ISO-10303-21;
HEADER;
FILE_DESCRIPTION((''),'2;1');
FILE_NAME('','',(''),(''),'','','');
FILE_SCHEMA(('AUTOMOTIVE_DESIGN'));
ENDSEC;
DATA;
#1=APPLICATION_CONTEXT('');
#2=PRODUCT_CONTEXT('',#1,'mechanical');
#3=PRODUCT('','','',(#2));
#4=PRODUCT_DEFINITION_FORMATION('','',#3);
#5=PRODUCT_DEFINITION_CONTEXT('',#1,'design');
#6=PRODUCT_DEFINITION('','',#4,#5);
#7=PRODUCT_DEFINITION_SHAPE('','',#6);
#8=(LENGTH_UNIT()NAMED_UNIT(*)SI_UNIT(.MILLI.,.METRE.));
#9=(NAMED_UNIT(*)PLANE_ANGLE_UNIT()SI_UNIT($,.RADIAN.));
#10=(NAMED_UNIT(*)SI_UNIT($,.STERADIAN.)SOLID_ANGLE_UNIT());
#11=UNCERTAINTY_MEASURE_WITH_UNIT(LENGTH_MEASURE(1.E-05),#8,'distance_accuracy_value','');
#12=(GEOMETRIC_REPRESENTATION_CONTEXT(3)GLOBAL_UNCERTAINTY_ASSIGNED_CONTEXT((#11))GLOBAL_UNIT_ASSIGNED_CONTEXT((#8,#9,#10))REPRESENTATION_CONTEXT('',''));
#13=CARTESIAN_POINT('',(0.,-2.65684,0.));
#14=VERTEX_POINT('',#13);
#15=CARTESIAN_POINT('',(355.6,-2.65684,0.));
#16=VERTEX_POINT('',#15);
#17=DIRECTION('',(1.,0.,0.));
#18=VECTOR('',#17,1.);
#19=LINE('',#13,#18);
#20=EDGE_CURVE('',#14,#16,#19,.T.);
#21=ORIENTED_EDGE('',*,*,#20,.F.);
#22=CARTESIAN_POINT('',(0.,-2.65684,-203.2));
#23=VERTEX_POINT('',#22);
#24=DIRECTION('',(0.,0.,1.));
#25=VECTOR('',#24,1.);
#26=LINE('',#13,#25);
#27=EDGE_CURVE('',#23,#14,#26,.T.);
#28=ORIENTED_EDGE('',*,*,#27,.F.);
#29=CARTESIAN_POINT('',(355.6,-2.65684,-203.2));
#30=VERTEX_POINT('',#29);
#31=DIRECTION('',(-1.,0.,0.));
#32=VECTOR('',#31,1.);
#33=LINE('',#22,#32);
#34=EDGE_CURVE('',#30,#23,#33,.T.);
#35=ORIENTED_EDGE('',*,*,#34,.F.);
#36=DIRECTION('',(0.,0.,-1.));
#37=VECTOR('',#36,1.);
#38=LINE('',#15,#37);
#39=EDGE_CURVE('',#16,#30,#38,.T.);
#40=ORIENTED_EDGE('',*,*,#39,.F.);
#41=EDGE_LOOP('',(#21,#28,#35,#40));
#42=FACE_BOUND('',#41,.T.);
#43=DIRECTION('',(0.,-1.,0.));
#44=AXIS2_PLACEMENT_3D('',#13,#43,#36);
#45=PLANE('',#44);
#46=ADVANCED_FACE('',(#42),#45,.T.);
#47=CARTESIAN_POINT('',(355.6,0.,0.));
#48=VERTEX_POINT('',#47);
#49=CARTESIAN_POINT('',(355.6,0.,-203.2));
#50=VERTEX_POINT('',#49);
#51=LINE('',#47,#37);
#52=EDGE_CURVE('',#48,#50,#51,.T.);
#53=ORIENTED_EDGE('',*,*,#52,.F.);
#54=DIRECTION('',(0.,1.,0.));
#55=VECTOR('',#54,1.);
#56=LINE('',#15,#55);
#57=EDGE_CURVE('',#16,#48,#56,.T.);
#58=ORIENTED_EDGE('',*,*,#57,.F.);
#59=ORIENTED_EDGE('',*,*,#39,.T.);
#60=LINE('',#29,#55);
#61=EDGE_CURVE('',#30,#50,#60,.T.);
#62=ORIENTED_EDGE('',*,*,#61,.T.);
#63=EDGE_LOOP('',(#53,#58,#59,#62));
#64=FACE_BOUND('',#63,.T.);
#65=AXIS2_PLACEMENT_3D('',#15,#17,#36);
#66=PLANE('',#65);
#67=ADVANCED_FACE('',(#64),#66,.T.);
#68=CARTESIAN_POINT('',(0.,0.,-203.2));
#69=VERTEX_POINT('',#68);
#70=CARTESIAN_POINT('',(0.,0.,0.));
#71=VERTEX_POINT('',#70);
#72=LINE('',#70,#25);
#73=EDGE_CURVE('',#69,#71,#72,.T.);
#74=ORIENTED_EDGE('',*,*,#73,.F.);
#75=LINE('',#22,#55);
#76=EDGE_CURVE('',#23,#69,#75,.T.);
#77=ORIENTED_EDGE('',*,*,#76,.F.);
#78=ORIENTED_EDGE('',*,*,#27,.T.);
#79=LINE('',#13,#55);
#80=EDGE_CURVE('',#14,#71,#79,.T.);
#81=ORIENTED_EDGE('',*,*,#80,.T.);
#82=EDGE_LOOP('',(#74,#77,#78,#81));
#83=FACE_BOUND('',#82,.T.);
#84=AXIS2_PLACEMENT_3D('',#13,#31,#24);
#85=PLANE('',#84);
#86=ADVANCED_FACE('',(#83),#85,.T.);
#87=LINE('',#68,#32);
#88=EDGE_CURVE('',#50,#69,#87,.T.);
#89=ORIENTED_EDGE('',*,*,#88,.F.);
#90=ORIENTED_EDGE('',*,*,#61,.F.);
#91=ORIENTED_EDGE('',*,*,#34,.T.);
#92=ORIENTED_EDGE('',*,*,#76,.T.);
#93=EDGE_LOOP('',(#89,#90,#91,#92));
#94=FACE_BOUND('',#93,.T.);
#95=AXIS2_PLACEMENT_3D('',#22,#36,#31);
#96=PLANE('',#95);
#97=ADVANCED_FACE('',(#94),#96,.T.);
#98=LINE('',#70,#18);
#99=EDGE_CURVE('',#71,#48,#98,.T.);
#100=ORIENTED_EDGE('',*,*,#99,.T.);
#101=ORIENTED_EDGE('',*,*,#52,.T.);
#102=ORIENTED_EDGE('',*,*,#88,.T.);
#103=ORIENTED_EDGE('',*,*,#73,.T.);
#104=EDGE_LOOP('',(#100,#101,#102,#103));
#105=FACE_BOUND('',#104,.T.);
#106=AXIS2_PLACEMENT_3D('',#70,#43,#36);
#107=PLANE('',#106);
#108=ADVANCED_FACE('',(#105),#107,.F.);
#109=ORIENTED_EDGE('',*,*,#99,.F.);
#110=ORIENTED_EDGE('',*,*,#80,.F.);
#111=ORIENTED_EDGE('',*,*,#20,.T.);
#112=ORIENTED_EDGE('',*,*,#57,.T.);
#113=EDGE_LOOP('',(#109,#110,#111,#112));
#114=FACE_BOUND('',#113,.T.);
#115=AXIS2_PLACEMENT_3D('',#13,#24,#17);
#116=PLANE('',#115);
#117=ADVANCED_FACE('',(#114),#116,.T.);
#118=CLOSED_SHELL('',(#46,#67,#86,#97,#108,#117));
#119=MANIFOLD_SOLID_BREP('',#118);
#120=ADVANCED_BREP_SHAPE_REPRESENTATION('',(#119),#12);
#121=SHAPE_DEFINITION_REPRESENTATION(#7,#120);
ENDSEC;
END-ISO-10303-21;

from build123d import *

# Parameters (mm, degrees)
SKETCH1_W          = 355.6
SKETCH1_H          = 203.2
BASE_FLANGE1_DEPTH = 2.65684


# Sheet-metal steps are written as plain solids
with BuildPart() as part:
    # Sketch1 → Base-Flange1 (new body)
    with BuildSketch(Plane(origin=(0, 0, 0), x_dir=(1, 0, 0), z_dir=(0, 1, 0))):
        with Locations((177.8, 101.6)):
            Rectangle(SKETCH1_W, SKETCH1_H)
    extrude(amount=-BASE_FLANGE1_DEPTH)


solid = part.part
